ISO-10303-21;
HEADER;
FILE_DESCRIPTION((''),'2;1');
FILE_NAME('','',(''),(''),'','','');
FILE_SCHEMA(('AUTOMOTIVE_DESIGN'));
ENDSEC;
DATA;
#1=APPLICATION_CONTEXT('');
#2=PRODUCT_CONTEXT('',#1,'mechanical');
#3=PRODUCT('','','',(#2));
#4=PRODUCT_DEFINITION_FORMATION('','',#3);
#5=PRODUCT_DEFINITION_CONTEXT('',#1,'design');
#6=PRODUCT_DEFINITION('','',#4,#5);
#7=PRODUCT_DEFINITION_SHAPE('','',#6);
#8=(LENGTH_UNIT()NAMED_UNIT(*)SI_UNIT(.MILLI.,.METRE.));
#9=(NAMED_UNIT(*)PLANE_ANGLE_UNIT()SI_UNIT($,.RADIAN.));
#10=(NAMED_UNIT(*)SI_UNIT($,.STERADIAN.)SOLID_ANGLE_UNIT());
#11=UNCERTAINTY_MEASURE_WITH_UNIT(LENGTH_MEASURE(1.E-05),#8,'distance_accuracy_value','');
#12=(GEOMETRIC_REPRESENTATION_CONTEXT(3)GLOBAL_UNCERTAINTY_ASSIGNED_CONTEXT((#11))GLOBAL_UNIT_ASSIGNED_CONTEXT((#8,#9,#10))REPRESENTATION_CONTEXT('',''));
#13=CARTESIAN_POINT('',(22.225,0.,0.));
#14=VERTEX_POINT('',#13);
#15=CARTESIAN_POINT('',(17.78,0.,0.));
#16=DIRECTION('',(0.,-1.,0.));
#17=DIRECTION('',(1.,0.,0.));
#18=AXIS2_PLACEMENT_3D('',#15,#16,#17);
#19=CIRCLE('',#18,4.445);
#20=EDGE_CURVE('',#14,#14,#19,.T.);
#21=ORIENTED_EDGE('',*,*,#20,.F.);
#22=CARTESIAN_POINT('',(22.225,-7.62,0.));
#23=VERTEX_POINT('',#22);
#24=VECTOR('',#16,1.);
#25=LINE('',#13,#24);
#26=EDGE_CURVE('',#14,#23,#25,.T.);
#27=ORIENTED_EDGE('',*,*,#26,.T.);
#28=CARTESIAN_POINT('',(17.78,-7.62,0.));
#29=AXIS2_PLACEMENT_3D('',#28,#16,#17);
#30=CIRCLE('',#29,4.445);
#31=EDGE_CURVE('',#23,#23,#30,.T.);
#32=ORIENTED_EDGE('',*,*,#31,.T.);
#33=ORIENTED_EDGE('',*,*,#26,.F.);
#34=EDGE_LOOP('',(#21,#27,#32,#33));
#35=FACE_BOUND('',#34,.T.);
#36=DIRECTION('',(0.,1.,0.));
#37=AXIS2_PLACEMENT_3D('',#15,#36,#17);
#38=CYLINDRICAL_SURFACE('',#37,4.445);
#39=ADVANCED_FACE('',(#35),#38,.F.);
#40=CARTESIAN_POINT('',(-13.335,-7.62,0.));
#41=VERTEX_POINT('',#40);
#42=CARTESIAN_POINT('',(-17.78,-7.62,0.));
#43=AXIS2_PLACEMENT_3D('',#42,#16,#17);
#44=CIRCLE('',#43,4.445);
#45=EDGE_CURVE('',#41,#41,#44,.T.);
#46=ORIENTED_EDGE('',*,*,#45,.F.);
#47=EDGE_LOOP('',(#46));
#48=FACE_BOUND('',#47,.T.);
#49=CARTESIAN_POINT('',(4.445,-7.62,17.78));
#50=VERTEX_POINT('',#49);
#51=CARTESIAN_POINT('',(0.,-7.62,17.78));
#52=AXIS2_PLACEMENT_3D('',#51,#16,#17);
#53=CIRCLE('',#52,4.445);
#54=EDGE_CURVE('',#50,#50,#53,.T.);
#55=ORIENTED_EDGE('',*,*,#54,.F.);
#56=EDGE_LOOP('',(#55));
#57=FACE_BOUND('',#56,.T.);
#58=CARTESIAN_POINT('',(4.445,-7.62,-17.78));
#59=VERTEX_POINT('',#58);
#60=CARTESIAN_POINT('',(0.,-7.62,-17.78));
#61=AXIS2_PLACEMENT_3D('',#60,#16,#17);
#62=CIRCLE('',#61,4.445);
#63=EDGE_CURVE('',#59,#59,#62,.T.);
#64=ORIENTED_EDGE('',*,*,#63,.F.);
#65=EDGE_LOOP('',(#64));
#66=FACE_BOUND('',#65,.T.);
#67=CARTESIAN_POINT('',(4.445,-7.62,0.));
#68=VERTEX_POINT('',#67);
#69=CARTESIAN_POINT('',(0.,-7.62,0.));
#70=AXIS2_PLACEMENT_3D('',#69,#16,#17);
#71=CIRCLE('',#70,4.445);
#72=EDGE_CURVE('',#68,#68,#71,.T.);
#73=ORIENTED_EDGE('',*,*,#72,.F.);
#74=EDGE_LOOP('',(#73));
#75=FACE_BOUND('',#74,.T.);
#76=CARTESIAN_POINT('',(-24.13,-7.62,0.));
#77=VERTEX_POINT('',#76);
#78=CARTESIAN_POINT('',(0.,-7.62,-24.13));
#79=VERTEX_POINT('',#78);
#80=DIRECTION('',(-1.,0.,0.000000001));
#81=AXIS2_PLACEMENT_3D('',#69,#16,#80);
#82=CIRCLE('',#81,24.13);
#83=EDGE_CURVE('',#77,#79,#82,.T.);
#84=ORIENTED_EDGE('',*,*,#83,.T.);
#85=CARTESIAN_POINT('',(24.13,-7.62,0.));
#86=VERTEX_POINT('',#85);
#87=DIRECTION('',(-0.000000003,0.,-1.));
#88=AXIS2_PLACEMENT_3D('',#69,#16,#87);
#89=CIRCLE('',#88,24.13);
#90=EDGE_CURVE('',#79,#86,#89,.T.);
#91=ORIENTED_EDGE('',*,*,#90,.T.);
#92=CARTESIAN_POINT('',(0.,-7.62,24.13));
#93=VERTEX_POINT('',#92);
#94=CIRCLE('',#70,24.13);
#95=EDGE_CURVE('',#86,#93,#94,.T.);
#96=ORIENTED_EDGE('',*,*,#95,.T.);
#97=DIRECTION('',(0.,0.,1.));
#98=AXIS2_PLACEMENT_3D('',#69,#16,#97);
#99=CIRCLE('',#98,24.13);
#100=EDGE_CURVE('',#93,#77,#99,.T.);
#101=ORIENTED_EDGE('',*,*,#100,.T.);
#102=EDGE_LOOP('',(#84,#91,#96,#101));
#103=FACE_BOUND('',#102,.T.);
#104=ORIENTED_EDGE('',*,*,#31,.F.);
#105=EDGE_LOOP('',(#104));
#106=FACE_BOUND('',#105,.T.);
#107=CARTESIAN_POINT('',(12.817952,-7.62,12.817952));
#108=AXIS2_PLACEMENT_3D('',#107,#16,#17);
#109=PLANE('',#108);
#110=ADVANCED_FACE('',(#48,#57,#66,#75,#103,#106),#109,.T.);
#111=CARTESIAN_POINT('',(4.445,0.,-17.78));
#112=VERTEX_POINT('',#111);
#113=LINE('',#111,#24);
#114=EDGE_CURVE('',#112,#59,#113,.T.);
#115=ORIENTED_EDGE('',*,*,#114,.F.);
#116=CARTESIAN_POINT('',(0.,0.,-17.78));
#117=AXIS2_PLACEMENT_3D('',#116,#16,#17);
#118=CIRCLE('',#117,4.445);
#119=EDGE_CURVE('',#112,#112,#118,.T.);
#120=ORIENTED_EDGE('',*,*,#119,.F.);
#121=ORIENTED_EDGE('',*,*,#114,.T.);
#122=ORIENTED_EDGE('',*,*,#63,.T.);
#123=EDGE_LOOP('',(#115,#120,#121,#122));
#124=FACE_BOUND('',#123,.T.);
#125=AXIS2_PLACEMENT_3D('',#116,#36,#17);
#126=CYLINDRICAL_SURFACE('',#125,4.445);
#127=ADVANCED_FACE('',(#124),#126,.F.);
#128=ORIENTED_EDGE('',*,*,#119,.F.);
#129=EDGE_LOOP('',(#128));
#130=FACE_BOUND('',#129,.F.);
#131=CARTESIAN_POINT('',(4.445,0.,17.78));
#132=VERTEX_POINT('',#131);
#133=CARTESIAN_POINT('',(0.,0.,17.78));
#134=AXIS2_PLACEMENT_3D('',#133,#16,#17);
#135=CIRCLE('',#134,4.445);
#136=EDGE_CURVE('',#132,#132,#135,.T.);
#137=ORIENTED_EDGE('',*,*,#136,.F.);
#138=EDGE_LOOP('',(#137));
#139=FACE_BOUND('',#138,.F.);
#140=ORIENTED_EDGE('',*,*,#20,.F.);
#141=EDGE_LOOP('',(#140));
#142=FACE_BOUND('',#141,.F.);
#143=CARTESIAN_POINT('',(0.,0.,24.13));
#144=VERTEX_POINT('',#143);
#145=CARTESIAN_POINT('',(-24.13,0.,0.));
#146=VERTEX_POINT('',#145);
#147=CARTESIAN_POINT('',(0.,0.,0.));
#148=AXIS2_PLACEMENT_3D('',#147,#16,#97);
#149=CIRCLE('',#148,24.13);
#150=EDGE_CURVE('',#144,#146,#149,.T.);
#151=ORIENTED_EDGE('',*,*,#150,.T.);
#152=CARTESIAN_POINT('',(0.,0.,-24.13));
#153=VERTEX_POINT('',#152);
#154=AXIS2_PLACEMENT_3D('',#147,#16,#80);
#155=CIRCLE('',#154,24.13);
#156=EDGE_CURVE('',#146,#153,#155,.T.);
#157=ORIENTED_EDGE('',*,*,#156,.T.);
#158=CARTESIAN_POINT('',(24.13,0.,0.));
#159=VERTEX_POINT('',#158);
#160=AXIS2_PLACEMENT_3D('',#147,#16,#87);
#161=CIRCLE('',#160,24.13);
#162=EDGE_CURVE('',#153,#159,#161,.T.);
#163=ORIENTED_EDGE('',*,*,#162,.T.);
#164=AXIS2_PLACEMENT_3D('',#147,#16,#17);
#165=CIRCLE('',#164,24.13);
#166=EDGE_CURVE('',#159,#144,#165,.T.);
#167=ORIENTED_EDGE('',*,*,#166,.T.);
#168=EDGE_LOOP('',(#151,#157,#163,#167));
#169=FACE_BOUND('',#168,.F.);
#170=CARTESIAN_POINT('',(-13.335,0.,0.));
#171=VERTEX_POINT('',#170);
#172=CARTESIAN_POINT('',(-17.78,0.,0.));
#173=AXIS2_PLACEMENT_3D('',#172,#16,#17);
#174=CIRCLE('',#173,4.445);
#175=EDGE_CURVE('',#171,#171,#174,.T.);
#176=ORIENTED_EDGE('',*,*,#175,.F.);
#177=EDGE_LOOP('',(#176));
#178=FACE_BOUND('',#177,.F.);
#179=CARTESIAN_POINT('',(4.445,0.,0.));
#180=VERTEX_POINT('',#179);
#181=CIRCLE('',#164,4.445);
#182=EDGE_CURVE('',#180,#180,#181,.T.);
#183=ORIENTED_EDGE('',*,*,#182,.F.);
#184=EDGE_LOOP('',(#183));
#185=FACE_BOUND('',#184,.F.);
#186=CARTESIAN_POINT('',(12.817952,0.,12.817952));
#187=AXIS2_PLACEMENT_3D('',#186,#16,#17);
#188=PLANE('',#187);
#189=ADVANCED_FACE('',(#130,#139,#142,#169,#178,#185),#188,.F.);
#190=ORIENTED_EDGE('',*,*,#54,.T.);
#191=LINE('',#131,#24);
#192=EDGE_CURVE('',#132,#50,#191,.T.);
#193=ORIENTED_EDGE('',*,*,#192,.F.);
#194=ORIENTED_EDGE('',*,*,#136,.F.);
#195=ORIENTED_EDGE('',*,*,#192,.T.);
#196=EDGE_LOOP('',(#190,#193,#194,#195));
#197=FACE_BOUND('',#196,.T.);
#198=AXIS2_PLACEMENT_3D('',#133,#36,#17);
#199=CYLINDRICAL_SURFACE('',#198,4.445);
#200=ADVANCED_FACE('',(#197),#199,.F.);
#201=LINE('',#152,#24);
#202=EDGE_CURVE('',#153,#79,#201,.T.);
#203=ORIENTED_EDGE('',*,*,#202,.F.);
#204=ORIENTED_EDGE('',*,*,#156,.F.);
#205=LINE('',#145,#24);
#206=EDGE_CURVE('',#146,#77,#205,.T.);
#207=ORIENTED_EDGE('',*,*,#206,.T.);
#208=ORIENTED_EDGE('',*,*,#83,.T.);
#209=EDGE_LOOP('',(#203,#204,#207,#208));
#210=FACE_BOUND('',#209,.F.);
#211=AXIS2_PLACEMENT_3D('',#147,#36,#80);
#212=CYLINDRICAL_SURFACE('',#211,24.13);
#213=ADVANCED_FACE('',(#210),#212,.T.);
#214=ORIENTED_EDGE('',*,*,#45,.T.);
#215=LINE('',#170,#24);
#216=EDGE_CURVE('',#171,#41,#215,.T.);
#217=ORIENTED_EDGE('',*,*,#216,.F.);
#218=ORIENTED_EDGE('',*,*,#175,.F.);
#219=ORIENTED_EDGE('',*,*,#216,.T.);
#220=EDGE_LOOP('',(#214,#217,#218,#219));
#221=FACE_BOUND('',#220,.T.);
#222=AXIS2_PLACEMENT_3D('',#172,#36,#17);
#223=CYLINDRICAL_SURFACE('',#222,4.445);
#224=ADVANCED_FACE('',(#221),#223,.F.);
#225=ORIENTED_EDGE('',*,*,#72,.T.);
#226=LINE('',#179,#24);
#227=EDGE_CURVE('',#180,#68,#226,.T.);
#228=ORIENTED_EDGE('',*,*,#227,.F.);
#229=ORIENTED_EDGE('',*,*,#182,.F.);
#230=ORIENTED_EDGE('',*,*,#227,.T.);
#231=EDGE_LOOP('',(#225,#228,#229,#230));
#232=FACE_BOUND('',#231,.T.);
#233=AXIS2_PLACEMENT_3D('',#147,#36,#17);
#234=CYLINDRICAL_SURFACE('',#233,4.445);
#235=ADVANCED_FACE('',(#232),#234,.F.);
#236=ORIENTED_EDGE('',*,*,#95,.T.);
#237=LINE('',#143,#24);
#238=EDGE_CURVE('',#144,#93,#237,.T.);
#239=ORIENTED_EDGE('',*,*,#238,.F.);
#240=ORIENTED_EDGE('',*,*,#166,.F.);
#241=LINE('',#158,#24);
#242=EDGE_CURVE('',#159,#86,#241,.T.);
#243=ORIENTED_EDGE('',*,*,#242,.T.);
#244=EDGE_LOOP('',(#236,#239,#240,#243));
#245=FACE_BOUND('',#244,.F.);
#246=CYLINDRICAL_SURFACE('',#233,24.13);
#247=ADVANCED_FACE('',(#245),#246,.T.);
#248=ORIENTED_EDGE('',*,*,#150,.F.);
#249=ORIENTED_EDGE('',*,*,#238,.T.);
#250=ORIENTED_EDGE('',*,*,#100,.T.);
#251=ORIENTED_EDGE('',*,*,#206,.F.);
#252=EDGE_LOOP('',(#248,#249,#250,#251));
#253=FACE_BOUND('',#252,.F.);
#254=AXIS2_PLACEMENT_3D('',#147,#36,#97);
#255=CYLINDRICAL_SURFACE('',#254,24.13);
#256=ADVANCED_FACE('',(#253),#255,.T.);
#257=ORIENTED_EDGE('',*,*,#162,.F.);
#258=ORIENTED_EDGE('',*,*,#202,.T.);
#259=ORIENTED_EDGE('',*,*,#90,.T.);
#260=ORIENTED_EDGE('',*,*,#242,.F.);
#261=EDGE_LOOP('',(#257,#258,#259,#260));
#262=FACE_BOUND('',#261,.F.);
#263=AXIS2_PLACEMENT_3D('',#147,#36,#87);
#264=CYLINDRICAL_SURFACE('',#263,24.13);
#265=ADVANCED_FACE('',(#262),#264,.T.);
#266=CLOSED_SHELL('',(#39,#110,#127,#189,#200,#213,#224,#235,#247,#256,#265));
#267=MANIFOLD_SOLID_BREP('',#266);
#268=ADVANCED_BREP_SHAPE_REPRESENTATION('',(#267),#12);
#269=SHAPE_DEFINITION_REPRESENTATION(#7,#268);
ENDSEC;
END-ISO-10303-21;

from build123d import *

# Parameters (mm, degrees)
F0_R     = 4.445
F1_DEPTH = 7.62


# Not quite as in the source:
# - a feature names something its author has since deleted; it is built from what else it names


with BuildPart() as f1:
    # F0 (on Front) → F1 (new body)
    with BuildSketch(Plane.XZ):
        with BuildLine():
            Line((6.35, 17.78), (6.35, 6.35))
            Line((6.35, 6.35), (17.78, 6.35))
            ThreePointArc((17.78, 6.35), (22.2701280605, 4.4901280605), (24.13, 0))
            ThreePointArc((24.13, 0), (17.06248663, 17.06248663), (0, 24.13))
            ThreePointArc((0, 24.13), (4.4901280605, 22.2701280605), (6.35, 17.78))
        make_face()
        with BuildLine():
            Line((17.78, -6.35), (6.35, -6.35))
            Line((6.35, -6.35), (6.35, -17.78))
            ThreePointArc((6.35, -17.78), (4.4901280329, -22.2701280882), (-7.83e-08, -24.13))
            ThreePointArc((-7.83e-08, -24.13), (17.0624866024, -17.0624866577), (24.13, 0))
            ThreePointArc((24.13, 0), (22.2701280605, -4.4901280605), (17.78, -6.35))
        make_face()
        with BuildLine():
            Line((-17.78, 6.35), (-6.35, 6.35))
            Line((-6.35, 6.35), (-6.35, 17.78))
            ThreePointArc((-6.35, 17.78), (-4.4901280605, 22.2701280605), (0, 24.13))
            ThreePointArc((0, 24.13), (-17.0624866246, 17.0624866355), (-24.13, 1.54e-08))
            ThreePointArc((-24.13, 1.54e-08), (-22.2701280551, 4.490128066), (-17.78, 6.35))
        make_face()
        with BuildLine():
            Line((-6.35, -17.78), (-6.35, -6.35))
            Line((-6.35, -6.35), (-17.78, -6.35))
            ThreePointArc((-17.78, -6.35), (-22.270128066, -4.4901280551), (-24.13, 1.54e-08))
            ThreePointArc((-24.13, 1.54e-08), (-17.0624866631, -17.0624865969), (-7.83e-08, -24.13))
            ThreePointArc((-7.83e-08, -24.13), (-4.4901280882, -22.2701280329), (-6.35, -17.78))
        make_face()
        with BuildLine():
            ThreePointArc((-6.35, 17.78), (0, 11.43), (6.35, 17.78))
            ThreePointArc((6.35, 17.78), (4.4901280605, 22.2701280605), (0, 24.13))
            ThreePointArc((0, 24.13), (-4.4901280605, 22.2701280605), (-6.35, 17.78))
        make_face()
        with Locations((0, 17.78)):
            Circle(F0_R, mode=Mode.SUBTRACT)
        with BuildLine():
            ThreePointArc((24.13, 0), (22.2701280605, 4.4901280605), (17.78, 6.35))
            ThreePointArc((17.78, 6.35), (11.43, 0), (17.78, -6.35))
            ThreePointArc((17.78, -6.35), (22.2701280605, -4.4901280605), (24.13, 0))
        make_face()
        with Locations((17.78, 0)):
            Circle(F0_R, mode=Mode.SUBTRACT)
        with BuildLine():
            ThreePointArc((-7.83e-08, -24.13), (4.4901280329, -22.2701280882), (6.35, -17.78))
            ThreePointArc((6.35, -17.78), (0, -11.43), (-6.35, -17.78))
            ThreePointArc((-6.35, -17.78), (-4.4901280882, -22.2701280329), (-7.83e-08, -24.13))
        make_face()
        with Locations((0, -17.78)):
            Circle(F0_R, mode=Mode.SUBTRACT)
        with BuildLine():
            ThreePointArc((-11.43, 0), (-13.2898719395, 4.4901280605), (-17.78, 6.35))
            ThreePointArc((-17.78, 6.35), (-22.2701280551, 4.490128066), (-24.13, 1.54e-08))
            ThreePointArc((-24.13, 1.54e-08), (-22.270128066, -4.4901280551), (-17.78, -6.35))
            ThreePointArc((-17.78, -6.35), (-13.2898719395, -4.4901280605), (-11.43, 0))
        make_face()
        with Locations((-17.78, 0)):
            Circle(F0_R, mode=Mode.SUBTRACT)
        with BuildLine():
            ThreePointArc((0, -6.35), (4.4901280605, -4.4901280605), (6.35, 0))
            ThreePointArc((6.35, 0), (4.4901280605, 4.4901280605), (0, 6.35))
            ThreePointArc((0, 6.35), (-4.4901280605, 4.4901280605), (-6.35, 0))
            ThreePointArc((-6.35, 0), (-4.4901280605, -4.4901280605), (0, -6.35))
        make_face()
        Circle(F0_R, mode=Mode.SUBTRACT)
        with BuildLine():
            ThreePointArc((-6.35, 0), (-4.4901280605, 4.4901280605), (0, 6.35))
            Line((0, 6.35), (-6.35, 6.35))
            Line((-6.35, 6.35), (-6.35, 0))
        make_face()
        with BuildLine():
            Line((-6.35, -6.35), (0, -6.35))
            ThreePointArc((0, -6.35), (-4.4901280605, -4.4901280605), (-6.35, 0))
            Line((-6.35, 0), (-6.35, -6.35))
        make_face()
        with BuildLine():
            Line((6.35, -6.35), (6.35, 0))
            ThreePointArc((6.35, 0), (4.4901280605, -4.4901280605), (0, -6.35))
            Line((0, -6.35), (6.35, -6.35))
        make_face()
        with BuildLine():
            ThreePointArc((0, 6.35), (4.4901280605, 4.4901280605), (6.35, 0))
            Line((6.35, 0), (6.35, 6.35))
            Line((6.35, 6.35), (0, 6.35))
        make_face()
        with BuildLine():
            Line((-6.35, -6.35), (-6.35, 0))
            Line((-6.35, 0), (-6.35, 6.35))
            Line((-6.35, 6.35), (-17.78, 6.35))
            ThreePointArc((-17.78, 6.35), (-13.2898719395, 4.4901280605), (-11.43, 0))
            ThreePointArc((-11.43, 0), (-13.2898719395, -4.4901280605), (-17.78, -6.35))
            Line((-17.78, -6.35), (-6.35, -6.35))
        make_face()
        with BuildLine():
            Line((6.35, -6.35), (0, -6.35))
            Line((0, -6.35), (-6.35, -6.35))
            Line((-6.35, -6.35), (-6.35, -17.78))
            ThreePointArc((-6.35, -17.78), (0, -11.43), (6.35, -17.78))
            Line((6.35, -17.78), (6.35, -6.35))
        make_face()
        with BuildLine():
            Line((6.35, 6.35), (6.35, 0))
            Line((6.35, 0), (6.35, -6.35))
            Line((6.35, -6.35), (17.78, -6.35))
            ThreePointArc((17.78, -6.35), (11.43, 0), (17.78, 6.35))
            Line((17.78, 6.35), (6.35, 6.35))
        make_face()
        with BuildLine():
            Line((-6.35, 6.35), (0, 6.35))
            Line((0, 6.35), (6.35, 6.35))
            Line((6.35, 6.35), (6.35, 17.78))
            ThreePointArc((6.35, 17.78), (0, 11.43), (-6.35, 17.78))
            Line((-6.35, 17.78), (-6.35, 6.35))
        make_face()
    extrude(amount=F1_DEPTH)


solid = f1.part
